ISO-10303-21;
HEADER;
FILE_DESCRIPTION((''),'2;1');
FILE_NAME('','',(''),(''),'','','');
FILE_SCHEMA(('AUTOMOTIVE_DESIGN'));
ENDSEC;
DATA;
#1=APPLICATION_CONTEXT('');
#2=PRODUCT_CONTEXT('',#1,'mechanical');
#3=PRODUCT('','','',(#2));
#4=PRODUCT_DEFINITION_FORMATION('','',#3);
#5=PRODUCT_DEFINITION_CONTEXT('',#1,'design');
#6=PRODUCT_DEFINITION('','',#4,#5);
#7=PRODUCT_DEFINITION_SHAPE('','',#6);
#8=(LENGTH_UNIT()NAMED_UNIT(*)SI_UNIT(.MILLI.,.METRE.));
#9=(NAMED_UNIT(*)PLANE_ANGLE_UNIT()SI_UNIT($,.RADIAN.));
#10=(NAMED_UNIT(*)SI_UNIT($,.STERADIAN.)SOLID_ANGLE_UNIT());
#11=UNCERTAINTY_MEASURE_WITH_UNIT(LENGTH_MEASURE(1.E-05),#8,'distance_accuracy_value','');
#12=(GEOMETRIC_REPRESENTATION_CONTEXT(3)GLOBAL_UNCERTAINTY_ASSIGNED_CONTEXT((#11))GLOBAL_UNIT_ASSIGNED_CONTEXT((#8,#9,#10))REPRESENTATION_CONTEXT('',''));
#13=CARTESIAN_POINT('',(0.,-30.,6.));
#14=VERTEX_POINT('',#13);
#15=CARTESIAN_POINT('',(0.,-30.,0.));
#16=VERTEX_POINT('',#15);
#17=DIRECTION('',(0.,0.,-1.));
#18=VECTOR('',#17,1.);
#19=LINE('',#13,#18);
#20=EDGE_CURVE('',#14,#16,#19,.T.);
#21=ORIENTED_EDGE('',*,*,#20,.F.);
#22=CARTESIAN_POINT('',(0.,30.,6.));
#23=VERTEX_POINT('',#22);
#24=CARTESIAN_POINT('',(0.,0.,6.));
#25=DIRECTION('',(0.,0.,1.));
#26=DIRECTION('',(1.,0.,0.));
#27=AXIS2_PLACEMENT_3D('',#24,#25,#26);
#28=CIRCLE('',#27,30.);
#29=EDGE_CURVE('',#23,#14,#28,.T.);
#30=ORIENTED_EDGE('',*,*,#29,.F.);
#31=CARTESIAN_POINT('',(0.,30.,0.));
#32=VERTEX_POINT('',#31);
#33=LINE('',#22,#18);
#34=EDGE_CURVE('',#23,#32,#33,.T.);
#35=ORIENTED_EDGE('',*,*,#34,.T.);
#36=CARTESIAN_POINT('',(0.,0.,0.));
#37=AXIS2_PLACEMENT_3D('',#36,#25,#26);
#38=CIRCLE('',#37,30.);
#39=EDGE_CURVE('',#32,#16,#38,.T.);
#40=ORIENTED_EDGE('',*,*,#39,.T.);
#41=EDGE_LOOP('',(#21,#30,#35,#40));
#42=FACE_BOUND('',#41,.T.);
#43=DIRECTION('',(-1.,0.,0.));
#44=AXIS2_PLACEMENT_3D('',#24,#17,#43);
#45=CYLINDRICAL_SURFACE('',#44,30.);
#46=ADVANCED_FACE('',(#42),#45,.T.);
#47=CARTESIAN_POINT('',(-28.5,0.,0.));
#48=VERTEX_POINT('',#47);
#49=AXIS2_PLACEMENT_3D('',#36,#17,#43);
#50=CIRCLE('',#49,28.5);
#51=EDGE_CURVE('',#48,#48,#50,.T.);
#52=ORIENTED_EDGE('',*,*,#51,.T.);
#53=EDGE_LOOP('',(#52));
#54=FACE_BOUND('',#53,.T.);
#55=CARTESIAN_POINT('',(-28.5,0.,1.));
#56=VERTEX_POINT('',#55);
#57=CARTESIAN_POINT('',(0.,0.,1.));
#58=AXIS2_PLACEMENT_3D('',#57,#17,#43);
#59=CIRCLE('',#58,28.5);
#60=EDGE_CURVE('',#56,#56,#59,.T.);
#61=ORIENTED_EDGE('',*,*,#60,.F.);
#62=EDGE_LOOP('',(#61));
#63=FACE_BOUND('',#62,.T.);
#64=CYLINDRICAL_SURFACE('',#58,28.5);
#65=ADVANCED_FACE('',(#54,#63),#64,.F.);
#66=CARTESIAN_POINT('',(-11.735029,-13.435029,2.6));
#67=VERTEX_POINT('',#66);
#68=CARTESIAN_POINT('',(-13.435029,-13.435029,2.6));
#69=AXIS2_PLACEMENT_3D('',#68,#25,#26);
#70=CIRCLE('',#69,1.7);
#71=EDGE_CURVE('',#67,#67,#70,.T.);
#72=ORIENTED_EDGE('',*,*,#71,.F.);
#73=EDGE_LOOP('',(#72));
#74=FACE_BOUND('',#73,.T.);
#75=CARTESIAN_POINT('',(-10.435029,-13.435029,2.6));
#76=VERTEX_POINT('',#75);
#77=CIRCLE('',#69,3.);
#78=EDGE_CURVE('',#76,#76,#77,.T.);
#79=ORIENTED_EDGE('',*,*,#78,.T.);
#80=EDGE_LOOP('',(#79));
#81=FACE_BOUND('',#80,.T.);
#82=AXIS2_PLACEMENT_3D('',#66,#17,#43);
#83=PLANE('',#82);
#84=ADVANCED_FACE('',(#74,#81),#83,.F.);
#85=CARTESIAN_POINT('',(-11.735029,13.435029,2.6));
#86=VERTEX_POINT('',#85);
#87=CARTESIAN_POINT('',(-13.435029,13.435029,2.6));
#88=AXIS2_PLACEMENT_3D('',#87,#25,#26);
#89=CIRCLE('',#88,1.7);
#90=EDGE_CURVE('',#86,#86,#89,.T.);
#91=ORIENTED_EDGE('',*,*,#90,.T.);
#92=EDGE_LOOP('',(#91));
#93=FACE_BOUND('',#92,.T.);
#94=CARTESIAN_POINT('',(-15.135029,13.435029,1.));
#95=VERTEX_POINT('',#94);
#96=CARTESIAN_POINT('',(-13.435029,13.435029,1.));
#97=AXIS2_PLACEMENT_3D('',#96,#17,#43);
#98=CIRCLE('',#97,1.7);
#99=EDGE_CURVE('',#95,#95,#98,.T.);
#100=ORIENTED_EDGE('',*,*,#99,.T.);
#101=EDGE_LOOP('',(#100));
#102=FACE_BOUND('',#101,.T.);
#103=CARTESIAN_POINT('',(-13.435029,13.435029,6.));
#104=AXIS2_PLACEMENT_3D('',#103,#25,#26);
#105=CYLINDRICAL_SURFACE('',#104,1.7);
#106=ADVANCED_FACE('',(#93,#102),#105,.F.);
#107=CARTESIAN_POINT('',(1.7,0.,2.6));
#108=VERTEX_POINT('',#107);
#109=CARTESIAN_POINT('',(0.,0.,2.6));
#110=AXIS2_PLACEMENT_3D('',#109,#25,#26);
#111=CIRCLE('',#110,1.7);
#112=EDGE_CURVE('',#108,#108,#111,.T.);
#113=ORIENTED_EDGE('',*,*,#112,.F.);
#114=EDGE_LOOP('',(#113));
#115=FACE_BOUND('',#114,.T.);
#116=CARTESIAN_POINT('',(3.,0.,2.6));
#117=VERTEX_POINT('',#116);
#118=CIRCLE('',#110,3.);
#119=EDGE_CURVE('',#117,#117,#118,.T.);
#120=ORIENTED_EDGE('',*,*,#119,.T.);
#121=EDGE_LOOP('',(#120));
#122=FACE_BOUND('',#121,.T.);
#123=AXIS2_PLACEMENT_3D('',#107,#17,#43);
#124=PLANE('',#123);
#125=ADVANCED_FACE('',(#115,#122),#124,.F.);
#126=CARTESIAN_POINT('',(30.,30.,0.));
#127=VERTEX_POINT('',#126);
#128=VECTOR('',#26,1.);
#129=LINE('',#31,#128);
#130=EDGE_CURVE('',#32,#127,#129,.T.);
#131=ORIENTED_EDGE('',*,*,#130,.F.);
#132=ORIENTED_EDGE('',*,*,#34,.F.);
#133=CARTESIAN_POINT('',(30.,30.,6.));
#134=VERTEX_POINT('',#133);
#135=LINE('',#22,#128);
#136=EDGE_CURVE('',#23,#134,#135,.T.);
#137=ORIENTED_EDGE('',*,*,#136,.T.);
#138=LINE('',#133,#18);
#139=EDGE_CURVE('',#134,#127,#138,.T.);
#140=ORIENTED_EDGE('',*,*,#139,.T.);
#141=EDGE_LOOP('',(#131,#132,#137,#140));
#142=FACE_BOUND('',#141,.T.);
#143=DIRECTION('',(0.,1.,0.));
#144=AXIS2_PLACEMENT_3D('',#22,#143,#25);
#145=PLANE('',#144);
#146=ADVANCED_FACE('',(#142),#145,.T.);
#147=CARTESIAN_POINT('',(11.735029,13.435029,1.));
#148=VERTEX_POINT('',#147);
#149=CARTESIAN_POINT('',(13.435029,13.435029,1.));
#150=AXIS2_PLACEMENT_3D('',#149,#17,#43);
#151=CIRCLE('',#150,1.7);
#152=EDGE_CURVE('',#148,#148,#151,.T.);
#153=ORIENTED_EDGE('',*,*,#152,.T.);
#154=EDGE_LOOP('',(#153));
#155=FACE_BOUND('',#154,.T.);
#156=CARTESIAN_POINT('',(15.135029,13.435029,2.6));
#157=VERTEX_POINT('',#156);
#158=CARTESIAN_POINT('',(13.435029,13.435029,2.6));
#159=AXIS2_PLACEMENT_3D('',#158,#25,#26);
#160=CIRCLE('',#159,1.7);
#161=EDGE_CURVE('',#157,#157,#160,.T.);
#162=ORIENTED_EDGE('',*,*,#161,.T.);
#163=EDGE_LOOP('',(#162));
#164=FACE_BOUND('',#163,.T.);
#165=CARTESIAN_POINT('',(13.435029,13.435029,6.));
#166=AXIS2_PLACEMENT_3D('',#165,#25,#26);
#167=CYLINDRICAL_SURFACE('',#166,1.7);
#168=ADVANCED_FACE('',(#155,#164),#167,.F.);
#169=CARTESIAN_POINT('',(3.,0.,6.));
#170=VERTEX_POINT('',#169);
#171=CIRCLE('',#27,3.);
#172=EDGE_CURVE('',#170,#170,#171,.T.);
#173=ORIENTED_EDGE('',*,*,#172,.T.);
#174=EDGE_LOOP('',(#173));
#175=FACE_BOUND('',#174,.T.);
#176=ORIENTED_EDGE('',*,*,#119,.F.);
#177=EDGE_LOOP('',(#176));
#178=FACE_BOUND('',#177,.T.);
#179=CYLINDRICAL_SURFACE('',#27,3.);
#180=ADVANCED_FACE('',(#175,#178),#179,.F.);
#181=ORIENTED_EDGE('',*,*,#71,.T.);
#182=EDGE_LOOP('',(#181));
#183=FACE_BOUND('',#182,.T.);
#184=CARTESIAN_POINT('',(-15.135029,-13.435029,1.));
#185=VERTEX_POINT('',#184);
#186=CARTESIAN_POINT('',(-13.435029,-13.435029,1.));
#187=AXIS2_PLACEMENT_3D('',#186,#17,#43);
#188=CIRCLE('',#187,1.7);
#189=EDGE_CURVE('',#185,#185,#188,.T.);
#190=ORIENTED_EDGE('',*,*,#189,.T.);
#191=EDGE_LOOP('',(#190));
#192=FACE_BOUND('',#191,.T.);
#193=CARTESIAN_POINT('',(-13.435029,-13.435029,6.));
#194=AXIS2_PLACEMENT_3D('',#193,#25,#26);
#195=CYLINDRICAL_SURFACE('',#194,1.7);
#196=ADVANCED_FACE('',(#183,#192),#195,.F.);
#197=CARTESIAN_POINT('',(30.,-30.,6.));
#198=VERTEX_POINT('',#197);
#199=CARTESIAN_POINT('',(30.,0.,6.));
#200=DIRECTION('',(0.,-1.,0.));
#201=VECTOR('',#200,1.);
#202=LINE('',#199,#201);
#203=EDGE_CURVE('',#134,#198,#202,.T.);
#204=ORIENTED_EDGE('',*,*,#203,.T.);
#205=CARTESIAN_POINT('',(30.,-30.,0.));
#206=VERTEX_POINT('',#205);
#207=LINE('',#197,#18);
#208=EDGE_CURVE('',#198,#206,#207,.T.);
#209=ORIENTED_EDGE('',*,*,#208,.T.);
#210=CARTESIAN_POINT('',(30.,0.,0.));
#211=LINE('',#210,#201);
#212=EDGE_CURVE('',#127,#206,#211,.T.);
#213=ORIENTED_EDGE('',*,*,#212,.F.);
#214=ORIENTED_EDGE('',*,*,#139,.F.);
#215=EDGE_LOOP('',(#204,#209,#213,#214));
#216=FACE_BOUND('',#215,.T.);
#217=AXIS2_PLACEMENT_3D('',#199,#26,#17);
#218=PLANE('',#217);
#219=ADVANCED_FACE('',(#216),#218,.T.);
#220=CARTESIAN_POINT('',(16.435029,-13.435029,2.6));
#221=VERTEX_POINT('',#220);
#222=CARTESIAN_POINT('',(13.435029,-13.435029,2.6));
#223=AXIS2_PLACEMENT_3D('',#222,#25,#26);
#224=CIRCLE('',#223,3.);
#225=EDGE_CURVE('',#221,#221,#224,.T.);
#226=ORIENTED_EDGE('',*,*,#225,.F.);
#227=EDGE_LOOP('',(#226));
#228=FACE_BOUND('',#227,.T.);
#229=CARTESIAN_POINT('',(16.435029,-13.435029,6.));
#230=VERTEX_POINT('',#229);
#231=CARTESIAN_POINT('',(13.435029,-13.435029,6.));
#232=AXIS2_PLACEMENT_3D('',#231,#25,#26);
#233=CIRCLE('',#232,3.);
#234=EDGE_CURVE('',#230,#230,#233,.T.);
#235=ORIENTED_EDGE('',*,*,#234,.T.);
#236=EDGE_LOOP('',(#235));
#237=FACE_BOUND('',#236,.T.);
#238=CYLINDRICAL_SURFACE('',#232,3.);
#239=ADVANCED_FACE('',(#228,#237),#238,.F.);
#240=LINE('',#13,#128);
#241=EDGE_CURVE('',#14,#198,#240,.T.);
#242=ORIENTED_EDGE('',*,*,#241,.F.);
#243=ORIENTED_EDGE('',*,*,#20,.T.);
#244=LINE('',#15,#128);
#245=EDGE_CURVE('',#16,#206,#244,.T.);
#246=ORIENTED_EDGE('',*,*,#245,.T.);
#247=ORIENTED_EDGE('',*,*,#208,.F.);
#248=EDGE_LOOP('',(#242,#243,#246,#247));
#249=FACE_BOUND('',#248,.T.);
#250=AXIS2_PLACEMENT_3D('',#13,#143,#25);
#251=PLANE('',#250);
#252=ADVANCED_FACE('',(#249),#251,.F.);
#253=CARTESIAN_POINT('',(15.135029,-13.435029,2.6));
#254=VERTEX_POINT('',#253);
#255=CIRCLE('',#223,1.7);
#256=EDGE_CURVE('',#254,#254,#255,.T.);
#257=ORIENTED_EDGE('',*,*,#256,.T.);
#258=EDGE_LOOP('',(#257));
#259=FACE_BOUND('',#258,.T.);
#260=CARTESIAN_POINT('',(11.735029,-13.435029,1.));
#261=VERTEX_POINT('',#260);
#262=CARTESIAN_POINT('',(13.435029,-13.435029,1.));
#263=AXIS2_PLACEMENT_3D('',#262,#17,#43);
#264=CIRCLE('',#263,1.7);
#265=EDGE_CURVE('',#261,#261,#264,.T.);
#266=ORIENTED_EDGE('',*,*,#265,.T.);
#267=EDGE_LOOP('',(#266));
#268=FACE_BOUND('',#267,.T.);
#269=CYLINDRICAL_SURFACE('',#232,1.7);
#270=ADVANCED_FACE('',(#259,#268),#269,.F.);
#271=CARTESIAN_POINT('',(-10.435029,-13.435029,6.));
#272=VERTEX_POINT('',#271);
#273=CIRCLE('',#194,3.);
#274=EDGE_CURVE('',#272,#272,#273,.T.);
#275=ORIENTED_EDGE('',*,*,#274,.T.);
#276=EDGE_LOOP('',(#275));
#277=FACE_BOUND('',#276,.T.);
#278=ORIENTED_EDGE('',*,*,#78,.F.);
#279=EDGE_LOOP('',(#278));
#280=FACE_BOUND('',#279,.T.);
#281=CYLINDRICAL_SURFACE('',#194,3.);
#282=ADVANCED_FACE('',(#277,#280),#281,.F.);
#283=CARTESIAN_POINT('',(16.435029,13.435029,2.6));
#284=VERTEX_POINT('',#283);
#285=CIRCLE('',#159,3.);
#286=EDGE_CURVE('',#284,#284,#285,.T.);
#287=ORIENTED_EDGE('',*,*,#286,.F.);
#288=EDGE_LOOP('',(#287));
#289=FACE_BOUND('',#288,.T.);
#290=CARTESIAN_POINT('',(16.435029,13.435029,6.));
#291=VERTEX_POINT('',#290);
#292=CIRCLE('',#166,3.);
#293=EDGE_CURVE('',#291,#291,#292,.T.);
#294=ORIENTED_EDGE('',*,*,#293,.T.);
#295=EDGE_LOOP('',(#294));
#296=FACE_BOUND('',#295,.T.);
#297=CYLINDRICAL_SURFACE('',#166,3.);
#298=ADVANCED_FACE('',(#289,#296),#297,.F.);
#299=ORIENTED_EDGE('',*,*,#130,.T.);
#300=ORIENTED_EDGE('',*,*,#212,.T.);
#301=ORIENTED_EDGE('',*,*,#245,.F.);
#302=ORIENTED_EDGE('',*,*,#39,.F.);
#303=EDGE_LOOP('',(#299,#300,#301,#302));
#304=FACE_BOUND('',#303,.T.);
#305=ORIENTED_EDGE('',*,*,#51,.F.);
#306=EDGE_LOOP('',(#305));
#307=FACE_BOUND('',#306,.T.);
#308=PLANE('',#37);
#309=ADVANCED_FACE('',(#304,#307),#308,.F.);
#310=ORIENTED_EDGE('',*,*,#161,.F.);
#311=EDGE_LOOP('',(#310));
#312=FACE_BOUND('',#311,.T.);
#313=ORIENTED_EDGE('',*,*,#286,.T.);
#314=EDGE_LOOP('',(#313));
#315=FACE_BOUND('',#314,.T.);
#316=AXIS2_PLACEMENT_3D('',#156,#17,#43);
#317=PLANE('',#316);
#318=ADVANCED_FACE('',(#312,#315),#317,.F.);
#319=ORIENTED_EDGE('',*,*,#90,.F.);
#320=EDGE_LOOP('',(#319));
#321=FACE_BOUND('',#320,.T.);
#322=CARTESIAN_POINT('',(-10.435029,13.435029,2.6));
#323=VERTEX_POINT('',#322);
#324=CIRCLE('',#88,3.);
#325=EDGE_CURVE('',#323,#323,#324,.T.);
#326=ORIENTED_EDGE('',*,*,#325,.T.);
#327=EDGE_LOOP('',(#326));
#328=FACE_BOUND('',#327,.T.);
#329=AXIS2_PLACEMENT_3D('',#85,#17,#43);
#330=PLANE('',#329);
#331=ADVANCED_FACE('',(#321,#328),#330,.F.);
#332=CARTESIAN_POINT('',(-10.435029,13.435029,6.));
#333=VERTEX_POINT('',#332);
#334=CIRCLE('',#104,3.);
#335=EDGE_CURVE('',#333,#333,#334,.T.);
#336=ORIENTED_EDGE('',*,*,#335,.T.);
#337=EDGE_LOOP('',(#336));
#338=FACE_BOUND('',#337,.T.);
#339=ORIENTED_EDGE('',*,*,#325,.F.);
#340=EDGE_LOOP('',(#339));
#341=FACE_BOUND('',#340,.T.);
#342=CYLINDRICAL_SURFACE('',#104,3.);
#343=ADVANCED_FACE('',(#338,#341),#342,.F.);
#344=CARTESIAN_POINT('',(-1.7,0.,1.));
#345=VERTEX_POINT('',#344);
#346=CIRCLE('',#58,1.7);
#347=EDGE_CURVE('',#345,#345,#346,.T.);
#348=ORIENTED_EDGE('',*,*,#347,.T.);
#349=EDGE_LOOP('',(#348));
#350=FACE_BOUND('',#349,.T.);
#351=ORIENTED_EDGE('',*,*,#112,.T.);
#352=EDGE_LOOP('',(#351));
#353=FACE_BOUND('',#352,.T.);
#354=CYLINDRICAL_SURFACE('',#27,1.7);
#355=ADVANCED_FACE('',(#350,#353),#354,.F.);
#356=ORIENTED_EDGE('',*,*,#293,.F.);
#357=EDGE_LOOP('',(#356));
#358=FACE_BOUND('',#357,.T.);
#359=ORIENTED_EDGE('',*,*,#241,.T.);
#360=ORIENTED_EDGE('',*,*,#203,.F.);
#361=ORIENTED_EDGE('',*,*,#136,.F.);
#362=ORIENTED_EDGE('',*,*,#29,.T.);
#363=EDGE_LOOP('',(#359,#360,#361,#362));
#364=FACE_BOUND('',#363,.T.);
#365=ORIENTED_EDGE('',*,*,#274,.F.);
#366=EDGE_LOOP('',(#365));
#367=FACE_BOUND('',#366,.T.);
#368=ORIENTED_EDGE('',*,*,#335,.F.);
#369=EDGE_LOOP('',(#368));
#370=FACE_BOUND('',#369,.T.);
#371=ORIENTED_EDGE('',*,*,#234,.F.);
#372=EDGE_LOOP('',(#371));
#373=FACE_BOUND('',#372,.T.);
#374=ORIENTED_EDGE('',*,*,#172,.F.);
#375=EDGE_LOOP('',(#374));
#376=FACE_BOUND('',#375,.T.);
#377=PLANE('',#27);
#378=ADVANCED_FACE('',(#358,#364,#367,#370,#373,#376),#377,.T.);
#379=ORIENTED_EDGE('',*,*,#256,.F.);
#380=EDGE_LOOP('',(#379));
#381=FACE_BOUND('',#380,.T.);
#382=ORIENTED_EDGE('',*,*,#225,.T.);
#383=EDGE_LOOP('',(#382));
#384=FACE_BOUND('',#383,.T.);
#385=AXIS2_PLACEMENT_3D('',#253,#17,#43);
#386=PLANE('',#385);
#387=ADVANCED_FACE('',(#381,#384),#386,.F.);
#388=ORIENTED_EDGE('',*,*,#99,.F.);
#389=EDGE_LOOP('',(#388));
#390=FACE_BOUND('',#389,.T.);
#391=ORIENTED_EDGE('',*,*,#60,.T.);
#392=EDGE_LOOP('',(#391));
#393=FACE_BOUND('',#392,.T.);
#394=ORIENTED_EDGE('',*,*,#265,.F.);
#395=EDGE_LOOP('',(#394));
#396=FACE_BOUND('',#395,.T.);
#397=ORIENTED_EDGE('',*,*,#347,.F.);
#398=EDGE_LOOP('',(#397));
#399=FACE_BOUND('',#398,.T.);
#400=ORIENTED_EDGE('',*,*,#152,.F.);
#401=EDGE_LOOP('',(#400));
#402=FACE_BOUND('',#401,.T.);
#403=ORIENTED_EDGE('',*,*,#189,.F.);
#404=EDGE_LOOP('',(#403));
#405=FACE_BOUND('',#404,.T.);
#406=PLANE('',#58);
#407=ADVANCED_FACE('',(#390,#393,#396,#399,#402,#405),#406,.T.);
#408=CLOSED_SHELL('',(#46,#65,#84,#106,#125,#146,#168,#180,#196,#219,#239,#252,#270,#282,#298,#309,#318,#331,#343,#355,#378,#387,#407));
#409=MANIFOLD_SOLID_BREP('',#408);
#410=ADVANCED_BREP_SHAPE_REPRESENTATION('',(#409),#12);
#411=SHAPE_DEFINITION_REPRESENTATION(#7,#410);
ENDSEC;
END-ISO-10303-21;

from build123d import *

# Parameters (mm, degrees)
EXTRUDE_1_DEPTH              = 6
SKETCH_2_R                   = 28.5
CUT_EXTRUDE_1_DEPTH          = 1
HOLE_START                   = 2.6
HOLE_WIZARD_M3_1_OUTLINE_R   = 3
HOLE_WIZARD_M3_1_DEPTH       = 3.4
HOLE_START_2                 = 1
HOLE_WIZARD_M3_1_2_OUTLINE_R = 1.7
HOLE_WIZARD_M3_1_2_DEPTH     = 1.6


# Read off the part's stored shape, not the designer's step: M3 六角圆柱头螺钉的柱形沉头孔1
with BuildPart() as part:
    # 草图1 → 凸台-拉伸1 (new body)
    with BuildSketch(Plane.XY):
        with BuildLine():
            Line((0, 30), (30, 30))
            Line((30, 30), (30, -30))
            Line((30, -30), (0, -30))
            ThreePointArc((0, -30), (-30, 0), (0, 30))
        make_face()
    extrude(amount=EXTRUDE_1_DEPTH)

    # 草图2 → 切除-拉伸1 (cut)
    with BuildSketch(Plane(origin=(0, 0, 0), x_dir=(-1, 0, 0), z_dir=(0, 0, -1))):
        Circle(SKETCH_2_R)
    extrude(amount=-CUT_EXTRUDE_1_DEPTH, mode=Mode.SUBTRACT)

    # M3 六角圆柱头螺钉的柱形沉头孔1 outline → M3 六角圆柱头螺钉的柱形沉头孔1 (cut)
    with BuildSketch(Plane.XY.offset(HOLE_START)):
        with Locations((13.435028843, 13.435028843)):
            Circle(HOLE_WIZARD_M3_1_OUTLINE_R)
        with Locations((-13.435028843, -13.435028843)):
            Circle(HOLE_WIZARD_M3_1_OUTLINE_R)
        with Locations((-13.435028843, 13.435028843)):
            Circle(HOLE_WIZARD_M3_1_OUTLINE_R)
        with Locations((13.435028843, -13.435028843)):
            Circle(HOLE_WIZARD_M3_1_OUTLINE_R)
        Circle(HOLE_WIZARD_M3_1_OUTLINE_R)
    extrude(amount=HOLE_WIZARD_M3_1_DEPTH, mode=Mode.SUBTRACT)

    # Hole Wizard M3 _1 2 outline → Hole Wizard M3 _1 2 (cut)
    with BuildSketch(Plane.XY.offset(HOLE_START_2)):
        with Locations((13.435028843, 13.435028843)):
            Circle(HOLE_WIZARD_M3_1_2_OUTLINE_R)
        with Locations((-13.435028843, -13.435028843)):
            Circle(HOLE_WIZARD_M3_1_2_OUTLINE_R)
        with Locations((-13.435028843, 13.435028843)):
            Circle(HOLE_WIZARD_M3_1_2_OUTLINE_R)
        with Locations((13.435028843, -13.435028843)):
            Circle(HOLE_WIZARD_M3_1_2_OUTLINE_R)
        Circle(HOLE_WIZARD_M3_1_2_OUTLINE_R)
    extrude(amount=HOLE_WIZARD_M3_1_2_DEPTH, mode=Mode.SUBTRACT)


solid = part.part
